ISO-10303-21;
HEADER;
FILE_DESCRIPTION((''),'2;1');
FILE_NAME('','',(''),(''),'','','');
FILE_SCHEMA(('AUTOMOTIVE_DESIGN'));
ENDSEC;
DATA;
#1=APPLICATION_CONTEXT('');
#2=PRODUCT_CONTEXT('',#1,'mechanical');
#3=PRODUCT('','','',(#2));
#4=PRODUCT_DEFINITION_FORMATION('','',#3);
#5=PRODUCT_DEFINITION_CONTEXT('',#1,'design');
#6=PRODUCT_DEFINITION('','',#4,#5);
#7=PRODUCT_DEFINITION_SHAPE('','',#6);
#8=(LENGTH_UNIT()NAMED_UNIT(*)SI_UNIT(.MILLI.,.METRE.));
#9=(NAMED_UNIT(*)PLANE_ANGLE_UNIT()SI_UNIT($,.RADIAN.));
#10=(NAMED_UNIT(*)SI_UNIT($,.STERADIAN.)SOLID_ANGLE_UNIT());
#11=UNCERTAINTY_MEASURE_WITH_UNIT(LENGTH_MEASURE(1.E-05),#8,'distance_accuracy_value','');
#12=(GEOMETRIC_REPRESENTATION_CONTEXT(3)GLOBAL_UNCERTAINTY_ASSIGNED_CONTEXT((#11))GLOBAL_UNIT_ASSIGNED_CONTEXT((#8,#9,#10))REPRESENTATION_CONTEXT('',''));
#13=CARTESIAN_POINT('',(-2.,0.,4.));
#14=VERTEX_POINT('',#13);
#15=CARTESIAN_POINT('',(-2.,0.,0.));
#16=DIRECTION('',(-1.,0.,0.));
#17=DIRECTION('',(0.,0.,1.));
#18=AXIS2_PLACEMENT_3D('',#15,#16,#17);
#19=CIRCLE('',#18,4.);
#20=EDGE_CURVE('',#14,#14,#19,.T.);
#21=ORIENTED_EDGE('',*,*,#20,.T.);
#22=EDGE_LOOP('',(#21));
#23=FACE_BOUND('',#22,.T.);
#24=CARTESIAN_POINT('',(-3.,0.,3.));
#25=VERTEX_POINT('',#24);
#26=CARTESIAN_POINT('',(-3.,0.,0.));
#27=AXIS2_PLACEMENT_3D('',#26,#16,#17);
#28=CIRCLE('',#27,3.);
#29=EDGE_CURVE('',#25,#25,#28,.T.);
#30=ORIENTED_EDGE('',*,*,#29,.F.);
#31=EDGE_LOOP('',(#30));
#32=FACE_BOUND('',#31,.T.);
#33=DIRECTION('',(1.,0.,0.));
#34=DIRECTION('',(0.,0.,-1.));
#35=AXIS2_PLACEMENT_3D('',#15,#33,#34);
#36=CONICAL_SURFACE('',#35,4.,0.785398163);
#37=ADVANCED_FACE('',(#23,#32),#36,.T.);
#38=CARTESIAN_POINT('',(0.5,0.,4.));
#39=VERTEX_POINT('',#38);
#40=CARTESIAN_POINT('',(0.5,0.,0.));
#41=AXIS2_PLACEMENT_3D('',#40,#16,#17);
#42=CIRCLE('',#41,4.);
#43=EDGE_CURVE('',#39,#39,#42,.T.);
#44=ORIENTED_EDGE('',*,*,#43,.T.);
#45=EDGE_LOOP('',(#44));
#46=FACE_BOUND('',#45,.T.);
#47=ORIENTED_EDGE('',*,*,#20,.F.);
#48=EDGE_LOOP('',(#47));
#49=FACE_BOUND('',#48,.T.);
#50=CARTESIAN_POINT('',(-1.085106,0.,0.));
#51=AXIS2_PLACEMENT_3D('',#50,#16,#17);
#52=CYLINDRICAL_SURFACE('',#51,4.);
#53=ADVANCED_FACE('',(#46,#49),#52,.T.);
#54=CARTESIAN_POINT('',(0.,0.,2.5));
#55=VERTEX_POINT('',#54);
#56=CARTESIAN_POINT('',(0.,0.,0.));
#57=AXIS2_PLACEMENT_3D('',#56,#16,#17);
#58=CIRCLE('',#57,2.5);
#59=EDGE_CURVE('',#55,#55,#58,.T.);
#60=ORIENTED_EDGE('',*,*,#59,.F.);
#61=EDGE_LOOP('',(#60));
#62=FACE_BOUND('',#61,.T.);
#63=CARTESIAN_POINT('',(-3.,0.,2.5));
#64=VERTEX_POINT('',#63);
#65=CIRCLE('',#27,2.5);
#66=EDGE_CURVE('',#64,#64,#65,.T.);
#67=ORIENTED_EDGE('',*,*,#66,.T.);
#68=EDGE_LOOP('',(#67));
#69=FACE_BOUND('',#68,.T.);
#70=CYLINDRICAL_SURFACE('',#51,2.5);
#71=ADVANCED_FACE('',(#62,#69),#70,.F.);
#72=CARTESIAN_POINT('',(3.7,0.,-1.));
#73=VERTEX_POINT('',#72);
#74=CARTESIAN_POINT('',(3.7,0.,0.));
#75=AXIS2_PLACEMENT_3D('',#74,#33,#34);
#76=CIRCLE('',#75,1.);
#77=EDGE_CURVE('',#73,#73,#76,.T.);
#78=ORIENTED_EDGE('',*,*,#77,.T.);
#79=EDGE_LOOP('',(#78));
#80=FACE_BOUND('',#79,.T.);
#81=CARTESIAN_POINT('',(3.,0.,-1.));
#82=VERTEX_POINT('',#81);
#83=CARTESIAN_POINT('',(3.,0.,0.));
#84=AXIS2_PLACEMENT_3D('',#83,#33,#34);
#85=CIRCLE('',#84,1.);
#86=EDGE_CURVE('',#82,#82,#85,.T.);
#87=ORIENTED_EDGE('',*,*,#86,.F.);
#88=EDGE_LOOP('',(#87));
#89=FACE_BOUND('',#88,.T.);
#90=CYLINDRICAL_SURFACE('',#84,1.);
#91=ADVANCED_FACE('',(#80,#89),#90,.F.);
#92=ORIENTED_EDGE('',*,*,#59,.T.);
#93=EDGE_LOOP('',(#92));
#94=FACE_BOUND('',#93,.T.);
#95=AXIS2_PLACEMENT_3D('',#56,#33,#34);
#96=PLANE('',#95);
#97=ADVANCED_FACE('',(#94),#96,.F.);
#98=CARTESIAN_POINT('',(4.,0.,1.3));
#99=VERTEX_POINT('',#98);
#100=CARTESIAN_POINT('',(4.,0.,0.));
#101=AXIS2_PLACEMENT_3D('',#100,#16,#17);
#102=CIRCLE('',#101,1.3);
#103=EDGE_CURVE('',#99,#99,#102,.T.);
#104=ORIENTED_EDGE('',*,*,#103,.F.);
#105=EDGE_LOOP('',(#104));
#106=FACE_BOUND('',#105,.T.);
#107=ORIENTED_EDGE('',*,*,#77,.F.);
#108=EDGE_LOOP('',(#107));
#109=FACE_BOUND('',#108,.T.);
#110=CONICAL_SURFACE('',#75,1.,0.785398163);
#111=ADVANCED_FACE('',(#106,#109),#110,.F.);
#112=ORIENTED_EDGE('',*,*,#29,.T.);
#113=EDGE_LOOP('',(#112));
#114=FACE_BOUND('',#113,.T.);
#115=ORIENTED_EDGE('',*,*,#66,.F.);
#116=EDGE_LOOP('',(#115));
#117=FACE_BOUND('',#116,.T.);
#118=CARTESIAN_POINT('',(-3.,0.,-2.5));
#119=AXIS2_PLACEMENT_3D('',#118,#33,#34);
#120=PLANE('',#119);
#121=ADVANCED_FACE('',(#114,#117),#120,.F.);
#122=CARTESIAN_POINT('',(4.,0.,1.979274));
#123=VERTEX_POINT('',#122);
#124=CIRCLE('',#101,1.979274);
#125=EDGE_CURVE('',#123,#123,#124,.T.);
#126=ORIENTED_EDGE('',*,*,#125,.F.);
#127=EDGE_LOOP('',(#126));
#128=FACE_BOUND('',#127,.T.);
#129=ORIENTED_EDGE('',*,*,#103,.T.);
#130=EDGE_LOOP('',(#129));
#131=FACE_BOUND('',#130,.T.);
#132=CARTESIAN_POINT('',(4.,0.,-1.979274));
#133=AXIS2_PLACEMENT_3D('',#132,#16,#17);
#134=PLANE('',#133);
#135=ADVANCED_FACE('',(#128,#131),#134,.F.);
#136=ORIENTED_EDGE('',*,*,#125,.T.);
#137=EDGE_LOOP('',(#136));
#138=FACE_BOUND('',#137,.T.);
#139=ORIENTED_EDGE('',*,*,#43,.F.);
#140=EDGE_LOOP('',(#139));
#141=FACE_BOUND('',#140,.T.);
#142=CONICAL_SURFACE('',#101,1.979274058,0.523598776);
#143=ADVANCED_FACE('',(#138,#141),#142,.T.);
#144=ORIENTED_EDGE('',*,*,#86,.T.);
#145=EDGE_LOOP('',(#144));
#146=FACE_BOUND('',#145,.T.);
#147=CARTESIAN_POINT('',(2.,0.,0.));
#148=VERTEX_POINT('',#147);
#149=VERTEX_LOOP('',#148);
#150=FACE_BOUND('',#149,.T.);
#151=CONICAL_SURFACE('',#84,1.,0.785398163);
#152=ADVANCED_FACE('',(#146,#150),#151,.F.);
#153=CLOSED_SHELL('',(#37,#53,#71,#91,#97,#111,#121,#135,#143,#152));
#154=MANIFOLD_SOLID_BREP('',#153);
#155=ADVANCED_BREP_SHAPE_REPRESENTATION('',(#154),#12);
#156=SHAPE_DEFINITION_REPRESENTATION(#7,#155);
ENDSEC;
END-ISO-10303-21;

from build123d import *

# Parameters (mm, degrees)
SKETCH2_R          = 1
CUT_EXTRUDE1_DEPTH = 0.3
CHAMFER1_SIZE      = 0.3
SKETCH3_R          = 1
CUT_EXTRUDE2_DEPTH = 0.7


with BuildPart() as part:
    # Sketch1 → Revolve1 (revolve)
    with BuildSketch(Plane(origin=(0, 0, 0), x_dir=(1, 0, 0), z_dir=(0, 1, 0)), mode=Mode.PRIVATE) as revolve1_sk:
        Polygon((0, 0), (0, 2.5), (-3, 2.5), (-3, 3), (-2, 4), (0.5, 4), (4, 1.979274058), (4, 0), align=None)
    revolve(revolve1_sk.sketch.rotate(Axis((-1.085106383, 0, 0), (1, 0, 0)), 180), axis=Axis((-1.085106383, 0, 0), (1, 0, 0)))

    # Sketch2 → Cut-Extrude1 (cut)
    with BuildSketch(Plane(origin=(4, 0, 0), x_dir=(0, 0, -1), z_dir=(1, 0, 0))):
        Circle(SKETCH2_R)
    extrude(amount=-CUT_EXTRUDE1_DEPTH, mode=Mode.SUBTRACT)

    # Chamfer1
    chamfer1_edges = [part.edges().sort_by_distance(p)[0] for p in [
        (4, 0, 1),
    ]]
    chamfer(chamfer1_edges, length=CHAMFER1_SIZE - 0.0001)  # a hair under: the kernel refuses the full size

    # Sketch3 → Cut-Extrude2 (cut)
    with BuildSketch(Plane(origin=(3.7, 0, 0), x_dir=(0, 0, -1), z_dir=(1, 0, 0))):
        Circle(SKETCH3_R)
    extrude(amount=-CUT_EXTRUDE2_DEPTH, mode=Mode.SUBTRACT)

    # Cut-Extrude3 cone 1 section (through the dimple's axis) → Cut-Extrude3 (revolve, cut)
    with BuildSketch(Plane(origin=(3, 0, 0), x_dir=(0, 0, -1), z_dir=(0, 1, 0))):
        Polygon((0, 0), (1, 0), (0, 1), align=None)
    revolve(axis=Axis((3, 0, 0), (-1, 0, 0)), mode=Mode.SUBTRACT)


solid = part.part
